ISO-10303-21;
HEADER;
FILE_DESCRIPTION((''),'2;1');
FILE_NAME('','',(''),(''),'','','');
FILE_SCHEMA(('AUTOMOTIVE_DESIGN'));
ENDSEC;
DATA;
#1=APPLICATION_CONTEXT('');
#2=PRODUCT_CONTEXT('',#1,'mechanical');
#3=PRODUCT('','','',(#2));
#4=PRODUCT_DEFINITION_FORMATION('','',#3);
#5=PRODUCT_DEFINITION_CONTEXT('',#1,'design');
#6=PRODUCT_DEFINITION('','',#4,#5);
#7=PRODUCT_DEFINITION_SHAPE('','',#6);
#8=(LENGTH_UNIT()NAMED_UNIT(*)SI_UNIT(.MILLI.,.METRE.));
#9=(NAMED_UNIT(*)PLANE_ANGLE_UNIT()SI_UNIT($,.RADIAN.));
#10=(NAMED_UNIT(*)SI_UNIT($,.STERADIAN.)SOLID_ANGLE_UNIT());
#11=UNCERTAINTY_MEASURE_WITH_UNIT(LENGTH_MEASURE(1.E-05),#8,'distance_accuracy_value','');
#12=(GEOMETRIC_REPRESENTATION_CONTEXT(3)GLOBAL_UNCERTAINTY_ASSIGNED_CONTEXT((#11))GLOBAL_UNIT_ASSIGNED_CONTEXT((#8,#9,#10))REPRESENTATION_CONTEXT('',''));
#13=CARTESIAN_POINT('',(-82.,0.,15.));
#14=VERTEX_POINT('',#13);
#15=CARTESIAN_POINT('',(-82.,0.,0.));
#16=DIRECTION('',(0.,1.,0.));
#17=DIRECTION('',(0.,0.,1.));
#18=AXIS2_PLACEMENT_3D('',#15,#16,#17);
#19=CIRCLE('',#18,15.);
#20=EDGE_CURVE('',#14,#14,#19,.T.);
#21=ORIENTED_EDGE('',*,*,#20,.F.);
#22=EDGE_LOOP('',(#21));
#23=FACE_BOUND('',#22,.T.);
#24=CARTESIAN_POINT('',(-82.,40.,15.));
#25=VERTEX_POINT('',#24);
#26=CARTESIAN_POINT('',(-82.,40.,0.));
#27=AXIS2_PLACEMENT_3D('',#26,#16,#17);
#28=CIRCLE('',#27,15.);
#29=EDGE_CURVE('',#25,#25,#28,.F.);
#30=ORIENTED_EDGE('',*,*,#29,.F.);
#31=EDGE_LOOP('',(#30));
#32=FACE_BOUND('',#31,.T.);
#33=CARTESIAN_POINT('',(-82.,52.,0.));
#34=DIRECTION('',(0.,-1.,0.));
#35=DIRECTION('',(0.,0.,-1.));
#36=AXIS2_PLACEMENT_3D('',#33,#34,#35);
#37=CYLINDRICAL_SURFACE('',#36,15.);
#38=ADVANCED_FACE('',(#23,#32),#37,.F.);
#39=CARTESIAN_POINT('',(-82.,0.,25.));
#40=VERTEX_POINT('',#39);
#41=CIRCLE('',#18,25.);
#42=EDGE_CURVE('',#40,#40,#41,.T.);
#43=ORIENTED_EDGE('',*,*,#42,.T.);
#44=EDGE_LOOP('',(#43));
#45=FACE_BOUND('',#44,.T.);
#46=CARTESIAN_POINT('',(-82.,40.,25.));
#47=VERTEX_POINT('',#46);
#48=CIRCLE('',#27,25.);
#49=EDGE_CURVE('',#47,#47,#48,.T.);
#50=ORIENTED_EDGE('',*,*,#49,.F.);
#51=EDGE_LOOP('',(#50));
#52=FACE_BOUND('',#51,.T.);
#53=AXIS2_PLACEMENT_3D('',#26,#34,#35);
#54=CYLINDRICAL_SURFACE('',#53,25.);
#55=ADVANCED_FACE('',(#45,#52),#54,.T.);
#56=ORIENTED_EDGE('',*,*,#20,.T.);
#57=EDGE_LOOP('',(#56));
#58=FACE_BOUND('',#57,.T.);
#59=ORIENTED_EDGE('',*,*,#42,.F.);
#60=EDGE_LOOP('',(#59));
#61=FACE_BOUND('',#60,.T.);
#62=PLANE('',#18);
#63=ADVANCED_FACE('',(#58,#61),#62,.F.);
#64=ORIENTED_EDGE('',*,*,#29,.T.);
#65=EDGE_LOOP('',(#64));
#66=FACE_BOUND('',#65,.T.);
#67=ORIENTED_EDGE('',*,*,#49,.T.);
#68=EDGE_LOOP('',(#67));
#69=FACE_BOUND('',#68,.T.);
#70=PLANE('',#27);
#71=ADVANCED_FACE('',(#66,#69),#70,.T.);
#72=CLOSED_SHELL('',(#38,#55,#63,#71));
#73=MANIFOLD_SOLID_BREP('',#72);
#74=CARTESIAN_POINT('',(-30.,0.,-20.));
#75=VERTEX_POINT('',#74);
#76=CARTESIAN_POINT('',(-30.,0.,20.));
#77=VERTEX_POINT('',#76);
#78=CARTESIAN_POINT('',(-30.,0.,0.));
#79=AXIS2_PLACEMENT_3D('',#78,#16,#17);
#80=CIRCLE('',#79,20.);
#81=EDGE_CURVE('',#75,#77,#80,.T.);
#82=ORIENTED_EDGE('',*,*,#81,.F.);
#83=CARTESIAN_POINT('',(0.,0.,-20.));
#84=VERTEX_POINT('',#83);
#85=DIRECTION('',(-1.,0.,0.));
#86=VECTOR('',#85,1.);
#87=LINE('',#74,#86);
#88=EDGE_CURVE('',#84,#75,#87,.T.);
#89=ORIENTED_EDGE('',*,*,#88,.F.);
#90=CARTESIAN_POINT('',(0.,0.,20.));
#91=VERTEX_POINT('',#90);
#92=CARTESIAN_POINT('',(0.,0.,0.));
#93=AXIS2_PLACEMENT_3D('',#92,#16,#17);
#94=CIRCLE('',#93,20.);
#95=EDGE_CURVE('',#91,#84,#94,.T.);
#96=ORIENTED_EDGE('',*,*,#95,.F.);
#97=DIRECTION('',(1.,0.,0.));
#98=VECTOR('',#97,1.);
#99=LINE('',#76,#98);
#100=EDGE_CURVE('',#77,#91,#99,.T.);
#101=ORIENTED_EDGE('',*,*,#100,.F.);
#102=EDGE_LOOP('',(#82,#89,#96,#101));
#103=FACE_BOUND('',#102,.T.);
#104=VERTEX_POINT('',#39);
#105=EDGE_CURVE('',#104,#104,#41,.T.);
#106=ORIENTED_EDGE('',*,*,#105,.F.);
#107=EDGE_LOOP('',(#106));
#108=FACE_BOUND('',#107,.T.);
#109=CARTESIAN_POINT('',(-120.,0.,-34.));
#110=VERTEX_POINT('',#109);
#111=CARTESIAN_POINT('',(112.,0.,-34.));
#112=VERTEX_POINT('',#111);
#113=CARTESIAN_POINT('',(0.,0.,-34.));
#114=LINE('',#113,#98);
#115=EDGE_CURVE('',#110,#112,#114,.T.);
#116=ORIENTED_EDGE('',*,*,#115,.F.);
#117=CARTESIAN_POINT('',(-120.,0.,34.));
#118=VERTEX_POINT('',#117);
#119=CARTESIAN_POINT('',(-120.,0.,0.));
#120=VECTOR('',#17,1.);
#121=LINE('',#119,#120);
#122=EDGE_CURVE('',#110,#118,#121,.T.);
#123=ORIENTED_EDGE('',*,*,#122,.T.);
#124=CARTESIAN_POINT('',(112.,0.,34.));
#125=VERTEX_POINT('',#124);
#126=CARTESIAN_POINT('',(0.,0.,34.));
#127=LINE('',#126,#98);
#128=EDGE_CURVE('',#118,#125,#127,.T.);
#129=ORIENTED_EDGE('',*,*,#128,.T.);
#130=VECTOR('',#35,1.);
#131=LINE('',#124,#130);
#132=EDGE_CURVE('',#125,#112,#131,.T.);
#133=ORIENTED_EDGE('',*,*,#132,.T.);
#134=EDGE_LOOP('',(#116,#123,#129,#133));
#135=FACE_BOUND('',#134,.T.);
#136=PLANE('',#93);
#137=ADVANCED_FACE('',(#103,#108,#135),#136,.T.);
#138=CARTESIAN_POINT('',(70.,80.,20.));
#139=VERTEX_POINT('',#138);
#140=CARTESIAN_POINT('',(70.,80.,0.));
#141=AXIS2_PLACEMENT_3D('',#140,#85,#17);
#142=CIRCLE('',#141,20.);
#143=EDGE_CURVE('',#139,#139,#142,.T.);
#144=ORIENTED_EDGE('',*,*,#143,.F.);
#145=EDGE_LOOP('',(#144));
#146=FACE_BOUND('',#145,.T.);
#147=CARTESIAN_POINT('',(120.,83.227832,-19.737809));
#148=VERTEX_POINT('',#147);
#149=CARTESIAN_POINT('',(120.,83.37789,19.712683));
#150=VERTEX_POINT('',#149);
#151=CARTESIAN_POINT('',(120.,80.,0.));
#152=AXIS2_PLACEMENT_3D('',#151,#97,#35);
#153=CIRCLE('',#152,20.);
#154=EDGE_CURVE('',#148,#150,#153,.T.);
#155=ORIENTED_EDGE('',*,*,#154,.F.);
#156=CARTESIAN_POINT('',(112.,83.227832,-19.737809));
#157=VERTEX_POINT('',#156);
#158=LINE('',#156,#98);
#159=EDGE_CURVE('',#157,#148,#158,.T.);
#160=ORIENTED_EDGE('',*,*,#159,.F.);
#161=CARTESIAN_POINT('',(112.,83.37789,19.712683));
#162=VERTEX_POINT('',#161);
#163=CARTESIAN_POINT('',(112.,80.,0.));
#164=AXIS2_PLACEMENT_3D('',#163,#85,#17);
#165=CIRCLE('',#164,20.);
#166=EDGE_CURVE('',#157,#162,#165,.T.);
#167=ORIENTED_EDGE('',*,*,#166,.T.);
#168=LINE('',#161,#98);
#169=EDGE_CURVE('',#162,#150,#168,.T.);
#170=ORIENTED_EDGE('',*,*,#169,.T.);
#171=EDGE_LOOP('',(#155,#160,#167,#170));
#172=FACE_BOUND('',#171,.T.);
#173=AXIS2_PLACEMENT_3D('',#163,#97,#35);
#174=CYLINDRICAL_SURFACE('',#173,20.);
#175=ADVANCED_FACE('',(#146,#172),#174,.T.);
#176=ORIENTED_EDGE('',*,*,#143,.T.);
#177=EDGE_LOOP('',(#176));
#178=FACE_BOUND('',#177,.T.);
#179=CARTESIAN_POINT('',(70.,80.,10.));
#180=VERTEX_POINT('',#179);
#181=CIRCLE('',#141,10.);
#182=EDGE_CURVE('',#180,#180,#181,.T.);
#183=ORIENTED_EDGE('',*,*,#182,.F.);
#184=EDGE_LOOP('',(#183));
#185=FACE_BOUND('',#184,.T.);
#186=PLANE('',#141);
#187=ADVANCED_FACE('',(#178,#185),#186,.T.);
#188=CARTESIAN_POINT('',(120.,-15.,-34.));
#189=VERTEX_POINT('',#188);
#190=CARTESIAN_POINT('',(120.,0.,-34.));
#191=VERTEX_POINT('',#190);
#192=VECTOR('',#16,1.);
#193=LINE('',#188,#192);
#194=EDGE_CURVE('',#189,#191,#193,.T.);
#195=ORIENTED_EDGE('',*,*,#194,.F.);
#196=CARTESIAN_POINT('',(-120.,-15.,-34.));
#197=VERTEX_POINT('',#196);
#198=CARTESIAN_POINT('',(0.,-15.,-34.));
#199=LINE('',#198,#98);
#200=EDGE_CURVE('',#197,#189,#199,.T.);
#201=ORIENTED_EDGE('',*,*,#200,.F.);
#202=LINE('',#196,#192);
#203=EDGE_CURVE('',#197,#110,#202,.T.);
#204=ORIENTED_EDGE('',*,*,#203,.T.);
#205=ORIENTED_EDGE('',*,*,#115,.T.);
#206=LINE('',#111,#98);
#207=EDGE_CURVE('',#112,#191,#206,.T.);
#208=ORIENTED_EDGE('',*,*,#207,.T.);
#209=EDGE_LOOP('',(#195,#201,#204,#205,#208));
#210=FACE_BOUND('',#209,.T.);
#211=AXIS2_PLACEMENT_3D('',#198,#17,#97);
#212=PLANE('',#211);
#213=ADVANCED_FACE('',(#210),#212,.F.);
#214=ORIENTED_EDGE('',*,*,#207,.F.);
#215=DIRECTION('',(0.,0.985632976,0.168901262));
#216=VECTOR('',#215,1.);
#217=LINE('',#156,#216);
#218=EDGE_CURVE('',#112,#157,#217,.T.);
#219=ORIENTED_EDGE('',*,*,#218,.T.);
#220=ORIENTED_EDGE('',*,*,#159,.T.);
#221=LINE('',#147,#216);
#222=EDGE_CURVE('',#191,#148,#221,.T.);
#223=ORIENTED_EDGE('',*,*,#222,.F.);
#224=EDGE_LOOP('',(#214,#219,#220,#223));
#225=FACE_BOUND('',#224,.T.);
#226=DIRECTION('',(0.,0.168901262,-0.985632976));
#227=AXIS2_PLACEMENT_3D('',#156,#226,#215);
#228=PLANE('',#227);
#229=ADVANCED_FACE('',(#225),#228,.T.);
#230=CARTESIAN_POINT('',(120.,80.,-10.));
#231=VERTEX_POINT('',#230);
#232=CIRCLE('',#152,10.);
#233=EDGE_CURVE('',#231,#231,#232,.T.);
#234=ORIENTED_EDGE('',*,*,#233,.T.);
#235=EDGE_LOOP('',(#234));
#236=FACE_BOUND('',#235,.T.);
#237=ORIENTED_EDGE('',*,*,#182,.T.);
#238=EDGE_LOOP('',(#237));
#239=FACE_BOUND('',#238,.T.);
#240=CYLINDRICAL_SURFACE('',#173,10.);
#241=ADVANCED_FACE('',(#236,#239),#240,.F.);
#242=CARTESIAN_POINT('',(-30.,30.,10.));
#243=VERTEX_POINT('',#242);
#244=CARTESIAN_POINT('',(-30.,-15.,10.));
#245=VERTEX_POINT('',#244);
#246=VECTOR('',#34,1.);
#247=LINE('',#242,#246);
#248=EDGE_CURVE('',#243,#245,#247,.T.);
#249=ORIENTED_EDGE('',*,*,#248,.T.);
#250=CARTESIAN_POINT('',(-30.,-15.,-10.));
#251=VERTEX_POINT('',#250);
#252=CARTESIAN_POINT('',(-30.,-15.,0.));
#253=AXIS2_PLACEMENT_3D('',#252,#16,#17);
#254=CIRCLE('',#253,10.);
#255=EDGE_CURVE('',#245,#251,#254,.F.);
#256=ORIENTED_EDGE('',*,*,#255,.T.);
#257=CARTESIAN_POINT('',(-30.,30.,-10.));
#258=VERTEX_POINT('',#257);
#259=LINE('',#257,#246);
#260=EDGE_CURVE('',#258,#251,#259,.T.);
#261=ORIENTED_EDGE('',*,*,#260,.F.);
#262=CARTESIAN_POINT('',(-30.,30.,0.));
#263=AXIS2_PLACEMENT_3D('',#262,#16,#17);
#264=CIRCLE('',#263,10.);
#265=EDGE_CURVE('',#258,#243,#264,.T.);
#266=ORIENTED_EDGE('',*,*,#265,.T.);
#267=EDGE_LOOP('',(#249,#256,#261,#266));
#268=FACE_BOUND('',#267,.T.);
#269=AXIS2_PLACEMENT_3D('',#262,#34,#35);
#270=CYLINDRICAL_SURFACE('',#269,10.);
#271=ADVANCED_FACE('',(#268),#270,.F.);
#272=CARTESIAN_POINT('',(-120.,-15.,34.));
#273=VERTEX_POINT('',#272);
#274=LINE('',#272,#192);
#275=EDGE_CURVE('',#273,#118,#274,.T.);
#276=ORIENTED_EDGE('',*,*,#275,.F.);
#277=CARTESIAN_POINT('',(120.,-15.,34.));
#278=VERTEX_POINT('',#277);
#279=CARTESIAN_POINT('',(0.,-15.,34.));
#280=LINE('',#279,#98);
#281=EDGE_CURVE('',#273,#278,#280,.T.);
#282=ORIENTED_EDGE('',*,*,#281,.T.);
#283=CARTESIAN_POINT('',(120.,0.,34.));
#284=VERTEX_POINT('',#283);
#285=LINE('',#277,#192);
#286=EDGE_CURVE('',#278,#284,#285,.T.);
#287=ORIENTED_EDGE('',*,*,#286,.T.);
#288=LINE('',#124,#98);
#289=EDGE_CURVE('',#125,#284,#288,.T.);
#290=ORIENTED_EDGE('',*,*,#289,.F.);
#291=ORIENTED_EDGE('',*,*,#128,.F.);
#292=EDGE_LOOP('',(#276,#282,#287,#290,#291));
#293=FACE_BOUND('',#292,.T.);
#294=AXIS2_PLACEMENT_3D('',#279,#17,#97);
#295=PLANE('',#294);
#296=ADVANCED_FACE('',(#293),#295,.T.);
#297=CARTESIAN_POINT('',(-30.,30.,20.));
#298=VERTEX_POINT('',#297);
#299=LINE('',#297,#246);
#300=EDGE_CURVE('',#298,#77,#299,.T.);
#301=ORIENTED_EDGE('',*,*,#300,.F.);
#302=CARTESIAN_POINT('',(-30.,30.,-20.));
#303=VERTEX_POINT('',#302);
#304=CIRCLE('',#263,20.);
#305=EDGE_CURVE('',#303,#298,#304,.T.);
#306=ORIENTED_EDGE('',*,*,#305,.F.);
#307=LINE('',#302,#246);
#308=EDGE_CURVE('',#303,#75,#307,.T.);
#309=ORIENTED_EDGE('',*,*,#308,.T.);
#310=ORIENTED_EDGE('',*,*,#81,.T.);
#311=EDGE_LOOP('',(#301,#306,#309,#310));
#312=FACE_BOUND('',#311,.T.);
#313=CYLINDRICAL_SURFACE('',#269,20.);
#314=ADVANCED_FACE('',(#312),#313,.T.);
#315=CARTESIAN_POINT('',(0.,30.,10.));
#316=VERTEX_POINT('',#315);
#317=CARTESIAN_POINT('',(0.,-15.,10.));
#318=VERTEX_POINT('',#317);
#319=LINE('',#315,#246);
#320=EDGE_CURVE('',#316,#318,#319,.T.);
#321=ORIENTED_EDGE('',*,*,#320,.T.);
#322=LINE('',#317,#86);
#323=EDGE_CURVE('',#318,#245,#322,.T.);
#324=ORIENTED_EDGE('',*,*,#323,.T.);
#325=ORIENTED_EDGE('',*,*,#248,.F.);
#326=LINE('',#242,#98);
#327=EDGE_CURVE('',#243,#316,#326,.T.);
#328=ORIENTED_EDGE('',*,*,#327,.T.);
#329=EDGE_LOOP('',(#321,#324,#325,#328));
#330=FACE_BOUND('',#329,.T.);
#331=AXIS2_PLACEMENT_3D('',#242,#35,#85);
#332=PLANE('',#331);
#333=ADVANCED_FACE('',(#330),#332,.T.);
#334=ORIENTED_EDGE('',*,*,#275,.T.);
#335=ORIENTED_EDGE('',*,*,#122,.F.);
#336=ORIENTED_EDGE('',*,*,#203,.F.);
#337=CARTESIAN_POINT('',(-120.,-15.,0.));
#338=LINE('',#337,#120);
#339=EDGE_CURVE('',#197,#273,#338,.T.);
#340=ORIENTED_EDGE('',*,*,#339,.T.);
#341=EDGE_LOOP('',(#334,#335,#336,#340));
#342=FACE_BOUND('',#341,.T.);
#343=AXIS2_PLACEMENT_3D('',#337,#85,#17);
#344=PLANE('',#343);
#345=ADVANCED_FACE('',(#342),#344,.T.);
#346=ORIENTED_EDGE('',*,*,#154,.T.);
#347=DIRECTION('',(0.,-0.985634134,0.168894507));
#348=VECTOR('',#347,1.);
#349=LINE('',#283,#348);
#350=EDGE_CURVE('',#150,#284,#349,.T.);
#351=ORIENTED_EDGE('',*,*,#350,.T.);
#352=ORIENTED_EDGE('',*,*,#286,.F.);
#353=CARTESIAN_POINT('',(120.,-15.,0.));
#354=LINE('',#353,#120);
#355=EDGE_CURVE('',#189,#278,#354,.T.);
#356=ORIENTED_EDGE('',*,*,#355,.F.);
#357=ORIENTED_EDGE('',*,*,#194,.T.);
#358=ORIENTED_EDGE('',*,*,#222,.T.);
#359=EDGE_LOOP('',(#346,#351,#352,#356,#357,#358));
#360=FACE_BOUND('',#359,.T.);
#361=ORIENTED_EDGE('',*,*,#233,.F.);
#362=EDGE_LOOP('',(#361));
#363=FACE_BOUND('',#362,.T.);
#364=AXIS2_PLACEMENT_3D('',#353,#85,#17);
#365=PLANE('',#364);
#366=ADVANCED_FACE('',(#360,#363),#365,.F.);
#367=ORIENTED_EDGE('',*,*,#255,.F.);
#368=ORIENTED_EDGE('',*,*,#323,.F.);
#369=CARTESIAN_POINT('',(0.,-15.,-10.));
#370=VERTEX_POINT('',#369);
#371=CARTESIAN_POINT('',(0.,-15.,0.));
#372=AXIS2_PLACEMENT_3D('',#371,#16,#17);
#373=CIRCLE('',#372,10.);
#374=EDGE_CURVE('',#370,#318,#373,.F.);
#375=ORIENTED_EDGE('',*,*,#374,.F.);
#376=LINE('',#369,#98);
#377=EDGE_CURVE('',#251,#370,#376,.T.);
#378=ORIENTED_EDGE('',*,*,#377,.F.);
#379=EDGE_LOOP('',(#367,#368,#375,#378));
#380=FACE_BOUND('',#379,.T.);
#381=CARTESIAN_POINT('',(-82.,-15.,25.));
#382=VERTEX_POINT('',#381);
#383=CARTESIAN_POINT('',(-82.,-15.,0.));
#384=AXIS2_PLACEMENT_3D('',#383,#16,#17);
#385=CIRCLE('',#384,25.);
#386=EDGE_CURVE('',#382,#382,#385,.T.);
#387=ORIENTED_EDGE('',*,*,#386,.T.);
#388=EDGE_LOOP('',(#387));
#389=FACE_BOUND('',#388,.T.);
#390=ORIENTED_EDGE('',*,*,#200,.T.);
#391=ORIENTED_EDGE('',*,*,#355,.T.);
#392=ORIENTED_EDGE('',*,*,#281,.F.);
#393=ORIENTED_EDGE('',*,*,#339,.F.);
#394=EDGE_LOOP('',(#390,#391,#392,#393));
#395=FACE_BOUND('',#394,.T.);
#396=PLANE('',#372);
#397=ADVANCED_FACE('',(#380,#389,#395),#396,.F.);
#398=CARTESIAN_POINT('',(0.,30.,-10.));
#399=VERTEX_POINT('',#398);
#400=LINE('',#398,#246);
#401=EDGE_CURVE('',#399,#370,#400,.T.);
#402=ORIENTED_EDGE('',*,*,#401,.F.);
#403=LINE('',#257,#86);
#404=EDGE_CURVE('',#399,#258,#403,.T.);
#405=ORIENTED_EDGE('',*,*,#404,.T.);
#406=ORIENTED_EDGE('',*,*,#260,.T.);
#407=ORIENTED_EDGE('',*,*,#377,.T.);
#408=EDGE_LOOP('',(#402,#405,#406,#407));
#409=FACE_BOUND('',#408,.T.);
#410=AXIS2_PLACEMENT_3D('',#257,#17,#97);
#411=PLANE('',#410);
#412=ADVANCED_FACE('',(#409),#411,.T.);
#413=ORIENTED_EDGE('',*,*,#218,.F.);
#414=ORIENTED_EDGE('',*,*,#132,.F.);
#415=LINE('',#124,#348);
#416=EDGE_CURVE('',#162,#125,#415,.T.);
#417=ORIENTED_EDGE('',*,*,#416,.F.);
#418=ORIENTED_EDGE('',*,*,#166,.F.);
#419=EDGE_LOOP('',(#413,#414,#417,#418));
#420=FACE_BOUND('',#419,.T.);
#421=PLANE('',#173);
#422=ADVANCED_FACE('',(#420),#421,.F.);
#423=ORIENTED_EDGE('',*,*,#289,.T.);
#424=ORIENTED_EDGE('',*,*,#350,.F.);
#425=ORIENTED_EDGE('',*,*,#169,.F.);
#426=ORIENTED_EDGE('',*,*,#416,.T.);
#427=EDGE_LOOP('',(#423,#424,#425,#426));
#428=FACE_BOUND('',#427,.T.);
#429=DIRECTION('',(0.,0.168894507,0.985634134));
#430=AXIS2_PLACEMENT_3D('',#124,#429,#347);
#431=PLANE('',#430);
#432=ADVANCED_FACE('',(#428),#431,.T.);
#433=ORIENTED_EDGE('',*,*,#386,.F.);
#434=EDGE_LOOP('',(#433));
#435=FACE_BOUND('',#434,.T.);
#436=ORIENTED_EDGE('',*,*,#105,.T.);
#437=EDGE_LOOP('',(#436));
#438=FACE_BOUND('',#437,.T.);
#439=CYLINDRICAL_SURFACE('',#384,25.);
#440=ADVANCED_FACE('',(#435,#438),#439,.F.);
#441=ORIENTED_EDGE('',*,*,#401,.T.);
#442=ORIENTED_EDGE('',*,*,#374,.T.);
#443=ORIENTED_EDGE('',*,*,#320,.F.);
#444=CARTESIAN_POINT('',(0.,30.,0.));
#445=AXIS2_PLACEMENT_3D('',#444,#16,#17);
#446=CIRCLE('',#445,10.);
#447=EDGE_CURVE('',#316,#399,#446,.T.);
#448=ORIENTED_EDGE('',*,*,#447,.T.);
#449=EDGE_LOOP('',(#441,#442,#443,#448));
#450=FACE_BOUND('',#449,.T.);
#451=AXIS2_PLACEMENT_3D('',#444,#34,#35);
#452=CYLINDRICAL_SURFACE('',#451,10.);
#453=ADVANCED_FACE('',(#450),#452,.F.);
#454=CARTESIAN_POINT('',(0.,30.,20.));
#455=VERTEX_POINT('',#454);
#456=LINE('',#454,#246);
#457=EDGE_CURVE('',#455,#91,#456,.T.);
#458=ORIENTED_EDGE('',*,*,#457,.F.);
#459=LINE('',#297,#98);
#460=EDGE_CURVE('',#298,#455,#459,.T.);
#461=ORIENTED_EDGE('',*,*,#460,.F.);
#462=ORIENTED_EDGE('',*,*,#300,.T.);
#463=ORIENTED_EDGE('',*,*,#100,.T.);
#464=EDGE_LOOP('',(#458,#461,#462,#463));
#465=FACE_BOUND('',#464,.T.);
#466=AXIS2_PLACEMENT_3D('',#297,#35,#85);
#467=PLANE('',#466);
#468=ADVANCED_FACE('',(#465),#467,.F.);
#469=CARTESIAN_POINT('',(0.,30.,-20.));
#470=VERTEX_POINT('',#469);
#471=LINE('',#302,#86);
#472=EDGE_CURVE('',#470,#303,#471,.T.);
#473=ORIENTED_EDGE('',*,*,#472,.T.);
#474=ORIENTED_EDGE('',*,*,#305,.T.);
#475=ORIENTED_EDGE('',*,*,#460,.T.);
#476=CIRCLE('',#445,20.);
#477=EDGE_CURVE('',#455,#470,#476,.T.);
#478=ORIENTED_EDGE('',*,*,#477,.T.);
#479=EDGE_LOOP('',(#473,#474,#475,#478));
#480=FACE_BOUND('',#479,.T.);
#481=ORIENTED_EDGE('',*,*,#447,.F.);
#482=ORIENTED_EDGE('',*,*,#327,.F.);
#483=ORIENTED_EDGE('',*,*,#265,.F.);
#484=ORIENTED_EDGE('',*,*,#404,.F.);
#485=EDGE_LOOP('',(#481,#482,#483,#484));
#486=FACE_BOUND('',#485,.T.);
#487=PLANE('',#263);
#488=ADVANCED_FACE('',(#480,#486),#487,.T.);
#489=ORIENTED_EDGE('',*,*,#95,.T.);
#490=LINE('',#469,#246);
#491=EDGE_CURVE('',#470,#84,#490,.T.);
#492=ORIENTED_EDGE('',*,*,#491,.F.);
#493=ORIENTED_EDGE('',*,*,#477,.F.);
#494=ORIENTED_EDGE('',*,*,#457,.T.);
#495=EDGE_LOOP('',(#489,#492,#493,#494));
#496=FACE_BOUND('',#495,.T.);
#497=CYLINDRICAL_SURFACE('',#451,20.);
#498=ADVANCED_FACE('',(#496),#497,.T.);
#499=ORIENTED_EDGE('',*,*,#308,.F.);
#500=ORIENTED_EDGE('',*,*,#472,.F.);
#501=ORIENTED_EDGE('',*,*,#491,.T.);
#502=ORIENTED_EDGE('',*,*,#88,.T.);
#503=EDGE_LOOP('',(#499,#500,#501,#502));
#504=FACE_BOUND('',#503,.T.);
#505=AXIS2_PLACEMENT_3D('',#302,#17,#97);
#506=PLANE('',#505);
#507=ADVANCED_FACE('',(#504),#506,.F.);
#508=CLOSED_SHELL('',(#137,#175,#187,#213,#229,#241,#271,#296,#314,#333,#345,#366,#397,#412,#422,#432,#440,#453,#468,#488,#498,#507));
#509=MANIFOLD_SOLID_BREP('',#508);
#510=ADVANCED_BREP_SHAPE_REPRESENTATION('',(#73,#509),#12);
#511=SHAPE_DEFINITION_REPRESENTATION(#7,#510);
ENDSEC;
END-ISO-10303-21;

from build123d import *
from build123d.topology import SkipClean

# Parameters (mm, degrees)
SKETCH2_W               = 240
SKETCH2_H               = 68
SKETCH2_R               = 25
BOSS_EXTRUDE1_DEPTH     = 15
SKETCH2_4_R             = 25
BOSS_EXTRUDE3_DEPTH     = 40
SKETCH2_5_R             = 15
CUT_EXTRUDE1_DEPTH      = 52
BOSS_EXTRUDE6_DEPTH     = 30
CUT_EXTRUDE3_DEPTH      = 30
CUT_EXTRUDE3_DEPTH_BACK = 30
SKETCH9_R               = 10
BOSS_EXTRUDE7_DEPTH     = 8
SKETCH10_R              = 20
SKETCH10_R_2            = 10
BOSS_EXTRUDE8_DEPTH     = 42


with BuildPart() as part:
    # Sketch2 → Boss-Extrude1 (new body)
    with BuildSketch(Plane(origin=(0, 0, 0), x_dir=(1, 0, 0), z_dir=(0, 1, 0))):
        Rectangle(SKETCH2_W, SKETCH2_H)
        with Locations((-82, 0)):
            Circle(SKETCH2_R, mode=Mode.SUBTRACT)
    extrude(amount=-BOSS_EXTRUDE1_DEPTH)

    # Sketch4 → Boss-Extrude6 (add)
    with BuildSketch(Plane(origin=(0, 0, 0), x_dir=(1, 0, 0), z_dir=(0, 1, 0))):
        with BuildLine():
            Line((-30, 20), (0, 20))
            ThreePointArc((0, 20), (20, 0), (0, -20))
            Line((0, -20), (-30, -20))
            ThreePointArc((-30, -20), (-50, 0), (-30, 20))
        make_face()
        with BuildLine():
            Line((-30, 10), (0, 10))
            ThreePointArc((0, 10), (10, 0), (0, -10))
            Line((0, -10), (-30, -10))
            ThreePointArc((-30, -10), (-40, 0), (-30, 10))
        make_face(mode=Mode.SUBTRACT)
    extrude(amount=BOSS_EXTRUDE6_DEPTH)

    # Sketch6 → Cut-Extrude3 (cut, two sides: drawn at the far end of the back side and taken through both)
    with SkipClean():  # the faces are left unmerged after this step: merging them gives an invalid solid
        with BuildSketch(Plane(origin=(0, 0, 0), x_dir=(1, 0, 0), z_dir=(0, 1, 0)).offset(-CUT_EXTRUDE3_DEPTH_BACK)):
            with BuildLine():
                Line((-30, -10), (0, -10))
                ThreePointArc((0, -10), (10, 0), (0, 10))
                Line((0, 10), (-30, 10))
                ThreePointArc((-30, 10), (-40, 0), (-30, -10))
            make_face()
        extrude(amount=CUT_EXTRUDE3_DEPTH + CUT_EXTRUDE3_DEPTH_BACK, mode=Mode.SUBTRACT)
    add(part.part.scale(1), mode=Mode.REPLACE)  # the faces are merged on a copy

    # Sketch9 → Boss-Extrude7 (add)
    with BuildSketch(Plane(origin=(120, 0, 0), x_dir=(0, 0, -1), z_dir=(1, 0, 0))):
        with BuildLine():
            Line((-34, 0), (-19.712682674, 83.377890137))
            ThreePointArc((-19.712682674, 83.377890137), (0.076073465, 99.99985532), (19.737808866, 83.227832272))
            Line((19.737808866, 83.227832272), (34, 0))
            Line((34, 0), (-34, 0))
        make_face()
        with Locations((0, 80)):
            Circle(SKETCH9_R, mode=Mode.SUBTRACT)
    extrude(amount=-BOSS_EXTRUDE7_DEPTH)

    # Sketch10 → Boss-Extrude8 (add)
    with SkipClean():  # the faces are left unmerged after this step: merging them gives an invalid solid
        with BuildSketch(Plane.ZY.offset(-112)):
            with Locations((0, 80)):
                Circle(SKETCH10_R)
            with Locations((0, 80)):
                Circle(SKETCH10_R_2, mode=Mode.SUBTRACT)
        extrude(amount=BOSS_EXTRUDE8_DEPTH)
    add(part.part.scale(1), mode=Mode.REPLACE)  # the faces are merged on a copy


with BuildPart() as body_2:
    # Sketch2<4> → Boss-Extrude3 (new body)
    with BuildSketch(Plane(origin=(0, 0, 0), x_dir=(1, 0, 0), z_dir=(0, 1, 0))):
        with Locations((-82, 0)):
            Circle(SKETCH2_4_R)
    extrude(amount=BOSS_EXTRUDE3_DEPTH)

    # Sketch2<5> → Cut-Extrude1 (cut)
    with BuildSketch(Plane(origin=(0, 0, 0), x_dir=(1, 0, 0), z_dir=(0, 1, 0))):
        with Locations((-82, 0)):
            Circle(SKETCH2_5_R)
    extrude(amount=CUT_EXTRUDE1_DEPTH, mode=Mode.SUBTRACT)


solid = Compound([part.part, body_2.part])
